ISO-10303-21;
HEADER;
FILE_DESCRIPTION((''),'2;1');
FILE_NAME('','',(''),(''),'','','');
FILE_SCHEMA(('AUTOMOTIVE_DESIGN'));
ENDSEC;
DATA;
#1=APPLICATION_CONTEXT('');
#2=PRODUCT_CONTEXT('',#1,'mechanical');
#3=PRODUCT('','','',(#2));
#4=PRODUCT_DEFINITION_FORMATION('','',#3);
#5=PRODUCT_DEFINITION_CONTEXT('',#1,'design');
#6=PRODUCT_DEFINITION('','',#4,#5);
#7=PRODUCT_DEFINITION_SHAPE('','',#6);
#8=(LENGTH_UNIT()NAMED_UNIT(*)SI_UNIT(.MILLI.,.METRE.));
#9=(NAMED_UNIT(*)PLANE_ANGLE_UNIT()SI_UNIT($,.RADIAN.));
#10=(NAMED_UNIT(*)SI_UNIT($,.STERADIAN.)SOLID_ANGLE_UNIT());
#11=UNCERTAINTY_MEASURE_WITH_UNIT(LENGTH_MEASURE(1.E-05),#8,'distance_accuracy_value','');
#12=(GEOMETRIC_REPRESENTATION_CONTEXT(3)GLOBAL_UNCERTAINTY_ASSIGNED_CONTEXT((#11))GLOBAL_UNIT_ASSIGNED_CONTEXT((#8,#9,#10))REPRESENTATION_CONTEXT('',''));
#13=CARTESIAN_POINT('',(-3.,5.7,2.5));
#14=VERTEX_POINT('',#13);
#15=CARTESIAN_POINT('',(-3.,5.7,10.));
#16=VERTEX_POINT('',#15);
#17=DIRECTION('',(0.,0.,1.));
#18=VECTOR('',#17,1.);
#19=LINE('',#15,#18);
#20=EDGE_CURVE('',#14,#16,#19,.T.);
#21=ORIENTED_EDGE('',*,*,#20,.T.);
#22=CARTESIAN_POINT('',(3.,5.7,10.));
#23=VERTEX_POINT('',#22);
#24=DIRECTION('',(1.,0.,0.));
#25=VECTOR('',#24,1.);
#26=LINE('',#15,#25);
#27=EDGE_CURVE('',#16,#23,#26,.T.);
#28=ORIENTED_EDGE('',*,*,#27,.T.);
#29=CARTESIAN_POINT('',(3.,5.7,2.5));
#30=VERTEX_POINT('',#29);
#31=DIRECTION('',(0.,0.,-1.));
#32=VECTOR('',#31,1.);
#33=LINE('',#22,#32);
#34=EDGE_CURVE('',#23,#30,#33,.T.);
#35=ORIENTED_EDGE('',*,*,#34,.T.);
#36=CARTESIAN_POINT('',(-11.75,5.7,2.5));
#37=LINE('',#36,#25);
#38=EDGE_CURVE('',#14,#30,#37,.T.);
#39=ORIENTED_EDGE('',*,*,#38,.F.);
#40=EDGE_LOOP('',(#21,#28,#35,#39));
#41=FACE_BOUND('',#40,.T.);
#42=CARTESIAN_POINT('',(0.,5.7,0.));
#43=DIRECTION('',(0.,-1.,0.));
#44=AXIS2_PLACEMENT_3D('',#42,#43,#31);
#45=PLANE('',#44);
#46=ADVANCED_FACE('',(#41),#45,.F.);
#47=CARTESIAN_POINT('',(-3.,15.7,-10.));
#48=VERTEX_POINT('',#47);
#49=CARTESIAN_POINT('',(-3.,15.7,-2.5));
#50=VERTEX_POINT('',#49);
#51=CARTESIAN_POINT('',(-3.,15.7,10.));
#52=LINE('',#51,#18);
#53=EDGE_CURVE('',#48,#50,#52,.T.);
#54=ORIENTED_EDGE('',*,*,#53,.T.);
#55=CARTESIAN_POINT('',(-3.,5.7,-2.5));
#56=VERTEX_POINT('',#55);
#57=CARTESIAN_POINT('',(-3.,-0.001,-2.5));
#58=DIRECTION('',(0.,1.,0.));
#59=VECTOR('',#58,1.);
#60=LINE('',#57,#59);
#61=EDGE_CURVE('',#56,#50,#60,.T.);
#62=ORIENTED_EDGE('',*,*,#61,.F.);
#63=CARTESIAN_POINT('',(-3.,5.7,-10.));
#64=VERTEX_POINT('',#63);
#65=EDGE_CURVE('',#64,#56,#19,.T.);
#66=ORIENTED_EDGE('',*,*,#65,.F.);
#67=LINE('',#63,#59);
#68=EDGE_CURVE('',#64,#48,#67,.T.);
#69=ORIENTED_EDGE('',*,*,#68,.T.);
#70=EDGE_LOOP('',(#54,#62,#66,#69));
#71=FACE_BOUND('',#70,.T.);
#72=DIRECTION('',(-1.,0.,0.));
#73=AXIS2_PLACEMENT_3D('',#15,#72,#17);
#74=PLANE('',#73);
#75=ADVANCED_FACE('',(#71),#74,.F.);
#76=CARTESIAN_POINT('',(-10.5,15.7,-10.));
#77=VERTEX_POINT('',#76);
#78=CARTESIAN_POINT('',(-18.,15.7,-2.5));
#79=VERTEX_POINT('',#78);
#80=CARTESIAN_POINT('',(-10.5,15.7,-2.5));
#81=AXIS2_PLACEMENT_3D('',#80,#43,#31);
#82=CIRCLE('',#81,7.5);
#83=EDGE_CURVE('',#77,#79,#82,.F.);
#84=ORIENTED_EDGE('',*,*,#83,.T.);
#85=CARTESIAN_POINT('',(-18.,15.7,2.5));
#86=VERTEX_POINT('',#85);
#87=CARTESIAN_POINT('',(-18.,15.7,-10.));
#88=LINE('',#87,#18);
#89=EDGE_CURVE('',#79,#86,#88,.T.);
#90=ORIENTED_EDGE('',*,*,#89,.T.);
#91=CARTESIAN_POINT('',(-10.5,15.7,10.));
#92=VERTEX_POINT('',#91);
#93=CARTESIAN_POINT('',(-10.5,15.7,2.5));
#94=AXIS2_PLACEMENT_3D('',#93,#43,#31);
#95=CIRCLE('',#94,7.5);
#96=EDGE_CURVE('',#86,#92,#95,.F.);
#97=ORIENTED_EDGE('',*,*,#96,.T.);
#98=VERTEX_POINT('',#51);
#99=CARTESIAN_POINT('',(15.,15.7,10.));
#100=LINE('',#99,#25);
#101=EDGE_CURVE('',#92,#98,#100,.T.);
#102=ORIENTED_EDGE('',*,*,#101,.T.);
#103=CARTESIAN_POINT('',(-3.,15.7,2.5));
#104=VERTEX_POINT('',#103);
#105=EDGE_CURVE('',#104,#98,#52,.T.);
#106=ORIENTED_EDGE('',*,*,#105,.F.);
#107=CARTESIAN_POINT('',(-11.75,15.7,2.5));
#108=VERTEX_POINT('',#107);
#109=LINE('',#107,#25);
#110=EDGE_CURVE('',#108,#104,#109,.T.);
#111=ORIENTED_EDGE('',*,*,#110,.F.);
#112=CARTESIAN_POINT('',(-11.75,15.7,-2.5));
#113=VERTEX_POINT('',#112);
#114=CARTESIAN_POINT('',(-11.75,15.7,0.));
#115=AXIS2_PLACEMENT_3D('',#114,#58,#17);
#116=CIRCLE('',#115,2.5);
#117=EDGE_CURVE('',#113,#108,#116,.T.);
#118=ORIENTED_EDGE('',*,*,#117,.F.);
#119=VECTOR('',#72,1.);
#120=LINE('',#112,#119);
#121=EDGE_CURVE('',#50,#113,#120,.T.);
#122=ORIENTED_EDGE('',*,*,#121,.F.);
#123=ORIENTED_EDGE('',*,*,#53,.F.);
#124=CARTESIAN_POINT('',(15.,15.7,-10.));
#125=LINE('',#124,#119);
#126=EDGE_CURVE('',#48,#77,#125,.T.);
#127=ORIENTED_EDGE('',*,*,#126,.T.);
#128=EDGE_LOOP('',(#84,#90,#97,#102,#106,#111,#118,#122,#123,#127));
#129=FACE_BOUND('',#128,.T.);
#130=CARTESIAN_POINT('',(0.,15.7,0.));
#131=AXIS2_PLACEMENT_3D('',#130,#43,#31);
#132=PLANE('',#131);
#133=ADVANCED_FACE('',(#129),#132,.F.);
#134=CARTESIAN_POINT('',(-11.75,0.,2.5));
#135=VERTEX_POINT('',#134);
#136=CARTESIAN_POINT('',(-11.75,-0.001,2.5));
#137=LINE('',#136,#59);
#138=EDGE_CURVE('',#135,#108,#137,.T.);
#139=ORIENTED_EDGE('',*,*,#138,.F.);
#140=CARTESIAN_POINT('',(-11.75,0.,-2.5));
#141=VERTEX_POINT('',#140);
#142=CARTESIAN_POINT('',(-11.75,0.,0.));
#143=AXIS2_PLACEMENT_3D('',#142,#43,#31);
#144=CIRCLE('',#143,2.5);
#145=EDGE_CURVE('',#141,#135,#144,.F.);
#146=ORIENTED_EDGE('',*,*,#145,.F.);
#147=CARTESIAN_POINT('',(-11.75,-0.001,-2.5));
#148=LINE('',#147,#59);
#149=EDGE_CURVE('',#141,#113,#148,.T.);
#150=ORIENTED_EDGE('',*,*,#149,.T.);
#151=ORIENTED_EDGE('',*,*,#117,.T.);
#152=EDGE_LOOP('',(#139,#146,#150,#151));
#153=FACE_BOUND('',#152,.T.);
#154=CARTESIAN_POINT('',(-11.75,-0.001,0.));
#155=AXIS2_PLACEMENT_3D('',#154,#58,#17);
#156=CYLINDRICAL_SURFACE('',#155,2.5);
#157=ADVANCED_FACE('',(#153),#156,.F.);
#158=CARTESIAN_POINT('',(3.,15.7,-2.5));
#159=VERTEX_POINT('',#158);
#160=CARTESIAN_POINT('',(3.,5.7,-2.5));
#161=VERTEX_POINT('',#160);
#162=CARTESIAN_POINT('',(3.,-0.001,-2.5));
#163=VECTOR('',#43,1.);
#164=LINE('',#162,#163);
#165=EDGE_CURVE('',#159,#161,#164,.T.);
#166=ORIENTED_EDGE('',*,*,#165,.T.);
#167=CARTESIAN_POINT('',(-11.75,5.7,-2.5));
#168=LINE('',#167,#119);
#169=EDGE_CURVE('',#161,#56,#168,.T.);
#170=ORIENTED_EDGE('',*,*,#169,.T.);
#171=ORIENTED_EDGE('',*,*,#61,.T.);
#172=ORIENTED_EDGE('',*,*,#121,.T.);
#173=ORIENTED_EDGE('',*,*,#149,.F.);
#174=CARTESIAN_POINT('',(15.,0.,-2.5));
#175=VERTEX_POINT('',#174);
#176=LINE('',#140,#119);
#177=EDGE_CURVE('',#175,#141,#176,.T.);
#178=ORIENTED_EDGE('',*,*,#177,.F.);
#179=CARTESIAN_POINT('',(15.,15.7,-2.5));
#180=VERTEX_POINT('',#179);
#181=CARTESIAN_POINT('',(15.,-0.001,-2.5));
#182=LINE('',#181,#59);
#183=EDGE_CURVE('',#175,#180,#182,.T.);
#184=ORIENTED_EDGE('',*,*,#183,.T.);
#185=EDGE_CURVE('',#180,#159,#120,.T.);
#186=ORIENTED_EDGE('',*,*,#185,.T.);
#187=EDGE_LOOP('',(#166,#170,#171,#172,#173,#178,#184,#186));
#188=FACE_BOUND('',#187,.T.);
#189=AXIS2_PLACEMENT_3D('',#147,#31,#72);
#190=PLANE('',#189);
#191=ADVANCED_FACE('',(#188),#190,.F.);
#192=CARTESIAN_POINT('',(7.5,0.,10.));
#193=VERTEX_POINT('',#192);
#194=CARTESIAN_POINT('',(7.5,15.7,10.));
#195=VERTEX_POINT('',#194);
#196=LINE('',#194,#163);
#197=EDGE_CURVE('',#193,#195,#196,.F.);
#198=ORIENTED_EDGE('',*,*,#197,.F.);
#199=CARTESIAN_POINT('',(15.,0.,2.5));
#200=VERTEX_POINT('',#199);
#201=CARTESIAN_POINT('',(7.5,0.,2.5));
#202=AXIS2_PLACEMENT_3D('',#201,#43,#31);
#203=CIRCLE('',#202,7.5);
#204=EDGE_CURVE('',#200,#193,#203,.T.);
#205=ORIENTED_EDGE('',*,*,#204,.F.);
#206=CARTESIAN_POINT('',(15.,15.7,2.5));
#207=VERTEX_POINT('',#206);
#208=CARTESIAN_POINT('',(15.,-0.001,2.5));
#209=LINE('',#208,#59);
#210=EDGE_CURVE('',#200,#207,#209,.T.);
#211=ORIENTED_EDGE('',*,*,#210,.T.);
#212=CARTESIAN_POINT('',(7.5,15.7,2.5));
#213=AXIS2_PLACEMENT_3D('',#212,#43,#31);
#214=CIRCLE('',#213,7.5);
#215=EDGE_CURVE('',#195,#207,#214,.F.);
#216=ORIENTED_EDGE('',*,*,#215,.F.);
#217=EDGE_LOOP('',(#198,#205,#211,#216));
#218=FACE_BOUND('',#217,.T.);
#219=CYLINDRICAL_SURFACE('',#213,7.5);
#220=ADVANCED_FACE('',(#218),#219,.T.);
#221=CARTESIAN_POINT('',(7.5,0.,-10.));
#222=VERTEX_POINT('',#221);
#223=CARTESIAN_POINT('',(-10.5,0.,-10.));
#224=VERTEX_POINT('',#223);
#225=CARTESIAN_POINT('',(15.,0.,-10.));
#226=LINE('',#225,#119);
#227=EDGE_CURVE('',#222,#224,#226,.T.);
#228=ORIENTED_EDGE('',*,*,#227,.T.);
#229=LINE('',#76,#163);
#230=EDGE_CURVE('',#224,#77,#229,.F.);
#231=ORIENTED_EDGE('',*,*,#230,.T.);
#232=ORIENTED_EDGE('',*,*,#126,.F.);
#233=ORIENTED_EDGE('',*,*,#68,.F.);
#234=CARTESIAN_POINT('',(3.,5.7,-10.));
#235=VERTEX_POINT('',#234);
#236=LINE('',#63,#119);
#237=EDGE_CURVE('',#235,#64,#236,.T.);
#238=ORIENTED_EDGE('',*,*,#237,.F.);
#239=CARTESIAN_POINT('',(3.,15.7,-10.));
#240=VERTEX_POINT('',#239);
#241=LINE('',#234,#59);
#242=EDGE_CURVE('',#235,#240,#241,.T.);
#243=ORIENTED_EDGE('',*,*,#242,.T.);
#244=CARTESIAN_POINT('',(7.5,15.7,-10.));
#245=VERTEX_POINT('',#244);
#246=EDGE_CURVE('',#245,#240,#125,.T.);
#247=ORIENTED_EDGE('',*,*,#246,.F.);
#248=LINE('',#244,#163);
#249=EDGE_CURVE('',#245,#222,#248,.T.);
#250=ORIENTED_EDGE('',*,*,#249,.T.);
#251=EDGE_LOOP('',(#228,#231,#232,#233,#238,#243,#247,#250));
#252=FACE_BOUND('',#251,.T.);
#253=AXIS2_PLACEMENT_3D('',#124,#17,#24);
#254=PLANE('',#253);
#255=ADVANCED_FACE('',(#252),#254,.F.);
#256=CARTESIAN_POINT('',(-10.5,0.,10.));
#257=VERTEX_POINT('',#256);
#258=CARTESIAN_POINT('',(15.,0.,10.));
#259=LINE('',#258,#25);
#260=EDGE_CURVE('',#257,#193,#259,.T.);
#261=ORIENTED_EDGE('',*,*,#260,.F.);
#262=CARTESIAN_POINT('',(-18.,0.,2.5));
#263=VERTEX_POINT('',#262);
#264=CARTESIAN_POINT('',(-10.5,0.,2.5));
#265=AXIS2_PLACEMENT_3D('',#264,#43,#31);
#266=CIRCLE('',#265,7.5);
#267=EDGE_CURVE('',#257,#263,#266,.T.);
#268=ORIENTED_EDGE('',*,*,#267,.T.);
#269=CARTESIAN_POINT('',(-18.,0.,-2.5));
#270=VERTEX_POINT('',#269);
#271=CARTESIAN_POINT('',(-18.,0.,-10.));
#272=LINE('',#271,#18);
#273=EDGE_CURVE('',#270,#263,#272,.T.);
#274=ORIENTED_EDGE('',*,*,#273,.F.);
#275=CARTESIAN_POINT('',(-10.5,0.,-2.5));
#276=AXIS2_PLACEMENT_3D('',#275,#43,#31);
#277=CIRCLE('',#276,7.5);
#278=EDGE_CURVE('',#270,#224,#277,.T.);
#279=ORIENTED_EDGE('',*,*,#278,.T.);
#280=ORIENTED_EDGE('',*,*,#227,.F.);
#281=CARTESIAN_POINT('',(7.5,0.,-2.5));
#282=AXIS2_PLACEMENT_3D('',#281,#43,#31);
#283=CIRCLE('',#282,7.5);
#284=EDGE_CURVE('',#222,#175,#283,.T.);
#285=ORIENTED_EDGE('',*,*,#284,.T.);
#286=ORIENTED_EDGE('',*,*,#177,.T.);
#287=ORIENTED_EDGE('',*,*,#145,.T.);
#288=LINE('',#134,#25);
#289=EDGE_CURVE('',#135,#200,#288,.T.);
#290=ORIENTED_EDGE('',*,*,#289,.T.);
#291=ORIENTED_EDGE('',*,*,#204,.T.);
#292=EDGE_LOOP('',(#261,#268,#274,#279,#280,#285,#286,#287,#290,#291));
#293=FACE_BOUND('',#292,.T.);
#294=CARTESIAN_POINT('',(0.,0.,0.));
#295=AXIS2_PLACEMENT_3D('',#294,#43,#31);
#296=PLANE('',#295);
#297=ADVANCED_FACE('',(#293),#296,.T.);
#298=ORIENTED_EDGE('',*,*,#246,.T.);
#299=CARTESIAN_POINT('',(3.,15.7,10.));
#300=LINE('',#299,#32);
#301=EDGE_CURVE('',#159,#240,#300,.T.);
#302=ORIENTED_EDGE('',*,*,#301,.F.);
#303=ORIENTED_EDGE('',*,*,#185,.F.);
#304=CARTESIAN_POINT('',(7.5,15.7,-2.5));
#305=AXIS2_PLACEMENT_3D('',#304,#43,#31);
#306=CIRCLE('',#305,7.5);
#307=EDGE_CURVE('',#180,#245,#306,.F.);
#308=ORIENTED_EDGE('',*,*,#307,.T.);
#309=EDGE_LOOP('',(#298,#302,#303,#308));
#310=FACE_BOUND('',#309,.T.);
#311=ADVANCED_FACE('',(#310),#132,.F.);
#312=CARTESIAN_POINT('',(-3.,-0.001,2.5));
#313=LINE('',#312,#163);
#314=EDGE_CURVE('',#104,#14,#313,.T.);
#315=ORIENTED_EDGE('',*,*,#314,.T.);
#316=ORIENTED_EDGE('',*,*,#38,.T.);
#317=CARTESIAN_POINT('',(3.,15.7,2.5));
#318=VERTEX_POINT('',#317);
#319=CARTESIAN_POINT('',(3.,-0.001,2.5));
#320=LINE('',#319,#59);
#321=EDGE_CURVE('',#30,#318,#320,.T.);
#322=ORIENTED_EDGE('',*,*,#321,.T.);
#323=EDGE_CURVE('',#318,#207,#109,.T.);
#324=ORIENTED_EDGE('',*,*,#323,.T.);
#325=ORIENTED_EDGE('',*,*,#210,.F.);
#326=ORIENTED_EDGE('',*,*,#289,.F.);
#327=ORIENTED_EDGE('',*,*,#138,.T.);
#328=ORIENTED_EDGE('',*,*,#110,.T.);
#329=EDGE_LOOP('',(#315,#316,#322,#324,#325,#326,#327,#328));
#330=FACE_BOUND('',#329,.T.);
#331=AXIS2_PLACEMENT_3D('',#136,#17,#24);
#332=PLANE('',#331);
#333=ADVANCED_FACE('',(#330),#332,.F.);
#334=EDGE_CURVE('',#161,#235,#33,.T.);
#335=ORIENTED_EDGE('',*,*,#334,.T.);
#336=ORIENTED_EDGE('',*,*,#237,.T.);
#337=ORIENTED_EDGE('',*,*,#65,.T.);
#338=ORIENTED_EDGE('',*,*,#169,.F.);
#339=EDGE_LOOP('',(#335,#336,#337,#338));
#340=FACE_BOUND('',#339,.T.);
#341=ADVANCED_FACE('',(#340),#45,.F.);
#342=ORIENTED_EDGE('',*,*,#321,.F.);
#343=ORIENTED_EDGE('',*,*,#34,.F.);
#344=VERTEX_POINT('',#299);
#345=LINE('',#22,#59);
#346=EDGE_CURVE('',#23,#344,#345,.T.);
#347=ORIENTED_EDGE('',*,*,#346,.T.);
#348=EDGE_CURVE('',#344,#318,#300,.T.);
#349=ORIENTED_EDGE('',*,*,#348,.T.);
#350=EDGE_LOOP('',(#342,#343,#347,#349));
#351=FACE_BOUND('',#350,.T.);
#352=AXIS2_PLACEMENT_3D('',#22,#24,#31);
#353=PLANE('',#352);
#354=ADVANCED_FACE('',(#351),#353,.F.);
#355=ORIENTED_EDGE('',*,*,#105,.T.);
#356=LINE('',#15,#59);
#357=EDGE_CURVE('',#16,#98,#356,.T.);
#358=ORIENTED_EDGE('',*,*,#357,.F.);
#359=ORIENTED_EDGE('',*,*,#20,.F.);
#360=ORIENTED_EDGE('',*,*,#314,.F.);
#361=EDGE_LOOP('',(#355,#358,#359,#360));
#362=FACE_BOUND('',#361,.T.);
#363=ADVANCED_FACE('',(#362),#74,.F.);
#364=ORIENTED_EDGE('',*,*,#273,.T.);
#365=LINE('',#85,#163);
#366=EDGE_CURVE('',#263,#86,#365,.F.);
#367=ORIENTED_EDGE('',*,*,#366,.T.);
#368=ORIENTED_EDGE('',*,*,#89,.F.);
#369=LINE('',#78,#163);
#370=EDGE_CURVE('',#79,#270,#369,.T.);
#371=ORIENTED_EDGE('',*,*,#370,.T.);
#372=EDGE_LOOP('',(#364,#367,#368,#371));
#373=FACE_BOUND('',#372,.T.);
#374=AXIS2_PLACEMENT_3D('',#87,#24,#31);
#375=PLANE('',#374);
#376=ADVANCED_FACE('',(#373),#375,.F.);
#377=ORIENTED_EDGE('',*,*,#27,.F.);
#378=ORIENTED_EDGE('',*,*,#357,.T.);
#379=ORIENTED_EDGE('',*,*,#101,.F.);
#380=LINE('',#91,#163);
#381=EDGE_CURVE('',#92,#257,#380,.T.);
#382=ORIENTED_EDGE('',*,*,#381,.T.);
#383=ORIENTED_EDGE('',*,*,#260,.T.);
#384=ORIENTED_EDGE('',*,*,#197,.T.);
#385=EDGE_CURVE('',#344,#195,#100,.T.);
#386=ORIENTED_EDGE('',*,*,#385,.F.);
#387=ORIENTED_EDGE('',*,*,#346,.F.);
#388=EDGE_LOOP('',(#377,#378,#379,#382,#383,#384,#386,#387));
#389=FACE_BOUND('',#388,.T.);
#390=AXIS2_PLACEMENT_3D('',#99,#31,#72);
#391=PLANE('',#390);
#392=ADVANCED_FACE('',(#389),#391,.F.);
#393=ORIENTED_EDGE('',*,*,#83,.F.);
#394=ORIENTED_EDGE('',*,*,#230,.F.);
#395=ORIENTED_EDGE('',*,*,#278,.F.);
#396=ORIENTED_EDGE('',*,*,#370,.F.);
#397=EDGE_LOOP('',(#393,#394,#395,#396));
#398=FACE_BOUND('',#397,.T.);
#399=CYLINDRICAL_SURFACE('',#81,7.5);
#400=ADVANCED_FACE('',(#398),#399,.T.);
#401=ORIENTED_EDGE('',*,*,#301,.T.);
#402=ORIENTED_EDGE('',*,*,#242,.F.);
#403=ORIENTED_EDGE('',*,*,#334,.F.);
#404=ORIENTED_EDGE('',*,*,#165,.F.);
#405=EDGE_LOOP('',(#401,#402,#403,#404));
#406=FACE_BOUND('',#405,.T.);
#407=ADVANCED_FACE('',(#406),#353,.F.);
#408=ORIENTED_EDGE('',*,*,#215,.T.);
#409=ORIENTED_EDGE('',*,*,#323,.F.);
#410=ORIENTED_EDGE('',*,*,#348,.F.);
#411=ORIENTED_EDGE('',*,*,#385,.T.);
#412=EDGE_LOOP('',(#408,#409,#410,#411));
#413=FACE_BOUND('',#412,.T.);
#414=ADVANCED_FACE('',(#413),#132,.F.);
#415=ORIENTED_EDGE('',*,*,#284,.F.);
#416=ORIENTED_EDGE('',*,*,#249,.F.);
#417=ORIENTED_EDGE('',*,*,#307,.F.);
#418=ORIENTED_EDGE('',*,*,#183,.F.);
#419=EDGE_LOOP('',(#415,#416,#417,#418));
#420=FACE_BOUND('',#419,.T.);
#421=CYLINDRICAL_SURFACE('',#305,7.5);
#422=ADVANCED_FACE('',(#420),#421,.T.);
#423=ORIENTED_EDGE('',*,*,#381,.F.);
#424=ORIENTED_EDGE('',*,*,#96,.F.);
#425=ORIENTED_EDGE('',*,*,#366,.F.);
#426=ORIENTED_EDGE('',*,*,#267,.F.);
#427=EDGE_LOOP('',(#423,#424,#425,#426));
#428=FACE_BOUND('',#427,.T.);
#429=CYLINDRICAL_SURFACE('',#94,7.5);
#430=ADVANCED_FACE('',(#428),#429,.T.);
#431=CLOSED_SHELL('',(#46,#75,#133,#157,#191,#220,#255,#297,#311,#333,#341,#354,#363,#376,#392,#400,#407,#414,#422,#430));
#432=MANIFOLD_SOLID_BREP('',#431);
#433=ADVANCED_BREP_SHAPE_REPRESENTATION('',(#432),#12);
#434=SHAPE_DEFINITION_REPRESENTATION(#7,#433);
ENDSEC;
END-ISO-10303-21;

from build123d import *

# Parameters (mm, degrees)
CROQUIS1_W              = 33
CROQUIS1_H              = 20
SALIENTE_EXTRUIR1_DEPTH = 15.7
CORTAR_EXTRUIR1_REACH   = 27.894
CROQUIS2_R              = 2.5
CROQUIS6_W              = 6
CROQUIS6_H              = 20
CORTAR_EXTRUIR2_DEPTH   = 10
CORTAR_EXTRUIR3_START   = -15.7
CROQUIS7_W              = 26.75
CROQUIS7_H              = 5
CORTAR_EXTRUIR3_DEPTH   = 15.7
REDONDEO1_R             = 7.5


with BuildPart() as part:
    # Croquis1 → Saliente-Extruir1 (new body)
    with BuildSketch(Plane(origin=(0, 0, 0), x_dir=(1, 0, 0), z_dir=(0, 1, 0))):
        with Locations((-1.5, 0)):
            Rectangle(CROQUIS1_W, CROQUIS1_H)
    extrude(amount=SALIENTE_EXTRUIR1_DEPTH)

    # Croquis2 → Cortar-Extruir1 (cut, up to next)
    with BuildSketch(Plane(origin=(0, 15.7, 0), x_dir=(1, 0, 0), z_dir=(0, 1, 0)), mode=Mode.PRIVATE) as cortar_extruir1_sk1:
        with Locations(Location((11.75, 0, 0), (0, 0, 270))):
            Circle(CROQUIS2_R)
    cortar_extruir1_tool1 = extrude(cortar_extruir1_sk1.sketch, amount=-CORTAR_EXTRUIR1_REACH, mode=Mode.PRIVATE) & part.part
    # Croquis2 → Cortar-Extruir1 (cut, up to next)
    with BuildSketch(Plane(origin=(0, 15.7, 0), x_dir=(1, 0, 0), z_dir=(0, 1, 0)), mode=Mode.PRIVATE) as cortar_extruir1_sk2:
        with Locations(Location((-11.75, 0, 0), (0, 0, 270))):
            Circle(CROQUIS2_R)
    cortar_extruir1_tool2 = extrude(cortar_extruir1_sk2.sketch, amount=-CORTAR_EXTRUIR1_REACH, mode=Mode.PRIVATE) & part.part
    add(cortar_extruir1_tool1.solids().sort_by_distance((11.75, 15.7, 0))[0], mode=Mode.SUBTRACT)
    add(cortar_extruir1_tool2.solids().sort_by_distance((-11.75, 15.7, 0))[0], mode=Mode.SUBTRACT)

    # Croquis6 → Cortar-Extruir2 (cut)
    with BuildSketch(Plane(origin=(0, 15.7, 0), x_dir=(1, 0, 0), z_dir=(0, 1, 0))):
        Rectangle(CROQUIS6_W, CROQUIS6_H)
    extrude(amount=-CORTAR_EXTRUIR2_DEPTH, mode=Mode.SUBTRACT)

    # Croquis7 → Cortar-Extruir3 (cut)
    with BuildSketch(Plane(origin=(0, 15.7, 0), x_dir=(1, 0, 0), z_dir=(0, 1, 0)).offset(CORTAR_EXTRUIR3_START)):
        with Locations((1.625, 0)):
            Rectangle(CROQUIS7_W, CROQUIS7_H)
    extrude(amount=CORTAR_EXTRUIR3_DEPTH, mode=Mode.SUBTRACT)

    # Redondeo1
    redondeo1_edges = [part.edges().sort_by_distance(p)[0] for p in [
        (-18, 7.85, -10),
        (-18, 7.85, 10),
        (15, 7.85, -10),
        (15, 7.85, 10),
    ]]
    fillet(redondeo1_edges, radius=REDONDEO1_R - 0.0001)  # a hair under: the kernel refuses the full size


solid = part.part
